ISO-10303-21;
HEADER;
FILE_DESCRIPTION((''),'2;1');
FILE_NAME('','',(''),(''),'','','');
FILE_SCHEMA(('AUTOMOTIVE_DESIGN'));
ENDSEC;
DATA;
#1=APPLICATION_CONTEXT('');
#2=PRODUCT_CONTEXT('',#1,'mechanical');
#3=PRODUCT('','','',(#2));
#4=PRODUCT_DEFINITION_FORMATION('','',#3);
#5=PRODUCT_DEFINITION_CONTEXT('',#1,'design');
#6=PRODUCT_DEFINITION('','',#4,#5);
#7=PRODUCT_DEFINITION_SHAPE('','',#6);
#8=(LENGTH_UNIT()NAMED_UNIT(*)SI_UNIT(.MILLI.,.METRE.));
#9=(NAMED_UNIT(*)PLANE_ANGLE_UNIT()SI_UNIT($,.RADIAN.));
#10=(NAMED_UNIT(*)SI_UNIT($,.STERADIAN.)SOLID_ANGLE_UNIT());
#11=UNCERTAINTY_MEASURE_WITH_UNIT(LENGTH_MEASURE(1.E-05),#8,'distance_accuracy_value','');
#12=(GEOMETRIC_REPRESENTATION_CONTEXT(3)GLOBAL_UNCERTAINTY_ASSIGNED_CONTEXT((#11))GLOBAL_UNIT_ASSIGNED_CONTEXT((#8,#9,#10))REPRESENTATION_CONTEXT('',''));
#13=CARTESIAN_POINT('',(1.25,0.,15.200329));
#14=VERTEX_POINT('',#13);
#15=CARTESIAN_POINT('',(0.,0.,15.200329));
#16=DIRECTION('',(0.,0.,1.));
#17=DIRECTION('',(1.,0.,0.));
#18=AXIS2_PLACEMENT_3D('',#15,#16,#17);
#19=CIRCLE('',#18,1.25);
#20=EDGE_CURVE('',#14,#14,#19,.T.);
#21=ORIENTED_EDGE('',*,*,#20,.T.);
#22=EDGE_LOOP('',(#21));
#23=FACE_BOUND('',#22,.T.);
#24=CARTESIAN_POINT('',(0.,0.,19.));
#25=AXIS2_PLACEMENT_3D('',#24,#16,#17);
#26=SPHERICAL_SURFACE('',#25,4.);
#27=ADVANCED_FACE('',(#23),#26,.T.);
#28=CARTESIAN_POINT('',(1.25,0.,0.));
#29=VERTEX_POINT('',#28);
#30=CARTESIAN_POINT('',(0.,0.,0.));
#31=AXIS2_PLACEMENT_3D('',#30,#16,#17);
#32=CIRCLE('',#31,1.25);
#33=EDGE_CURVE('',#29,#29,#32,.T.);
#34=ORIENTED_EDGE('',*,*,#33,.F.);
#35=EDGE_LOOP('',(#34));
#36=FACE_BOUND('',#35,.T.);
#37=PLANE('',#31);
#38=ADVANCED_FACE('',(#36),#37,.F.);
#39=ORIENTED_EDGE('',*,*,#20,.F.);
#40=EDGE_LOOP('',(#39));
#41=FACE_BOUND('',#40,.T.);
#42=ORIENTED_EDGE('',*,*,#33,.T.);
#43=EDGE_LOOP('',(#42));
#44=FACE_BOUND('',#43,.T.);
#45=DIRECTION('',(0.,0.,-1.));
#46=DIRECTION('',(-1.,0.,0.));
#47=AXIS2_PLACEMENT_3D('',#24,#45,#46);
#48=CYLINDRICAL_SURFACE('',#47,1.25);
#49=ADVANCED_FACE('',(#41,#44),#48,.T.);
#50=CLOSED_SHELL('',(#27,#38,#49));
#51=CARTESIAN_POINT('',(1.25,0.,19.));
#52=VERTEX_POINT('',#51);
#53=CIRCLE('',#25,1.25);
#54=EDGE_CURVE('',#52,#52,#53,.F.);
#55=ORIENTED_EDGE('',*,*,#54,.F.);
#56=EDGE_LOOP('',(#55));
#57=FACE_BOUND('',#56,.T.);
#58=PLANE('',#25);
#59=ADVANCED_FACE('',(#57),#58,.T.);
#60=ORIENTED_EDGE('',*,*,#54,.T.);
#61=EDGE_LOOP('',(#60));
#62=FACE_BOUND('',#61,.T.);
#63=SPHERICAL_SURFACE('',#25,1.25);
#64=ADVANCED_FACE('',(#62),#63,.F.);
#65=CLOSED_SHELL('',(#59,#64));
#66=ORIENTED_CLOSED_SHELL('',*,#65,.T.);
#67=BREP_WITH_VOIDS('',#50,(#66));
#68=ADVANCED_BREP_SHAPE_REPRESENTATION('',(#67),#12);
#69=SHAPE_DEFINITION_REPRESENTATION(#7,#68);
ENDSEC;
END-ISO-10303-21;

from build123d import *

# Parameters (mm, degrees)
SKETCH1_R           = 1.25
BOSS_EXTRUDE1_DEPTH = 19


with BuildPart() as part:
    # Sketch1 → Boss-Extrude1 (new body)
    with BuildSketch(Plane.XY):
        Circle(SKETCH1_R)
    extrude(amount=BOSS_EXTRUDE1_DEPTH)

    # Sketch2 → Revolve1 (revolve)
    with BuildSketch(Plane.XY.offset(19)):
        with BuildLine():
            ThreePointArc((0, 4), (-4, 0), (0, -4))
            Line((0, -4), (0, -1.25))
            ThreePointArc((0, -1.25), (-1.25, 0), (0, 1.25))
            Line((0, 1.25), (0, 4))
        make_face()
    revolve(axis=Axis((0, -4, 19), (0, 1, 0)))


solid = part.part
